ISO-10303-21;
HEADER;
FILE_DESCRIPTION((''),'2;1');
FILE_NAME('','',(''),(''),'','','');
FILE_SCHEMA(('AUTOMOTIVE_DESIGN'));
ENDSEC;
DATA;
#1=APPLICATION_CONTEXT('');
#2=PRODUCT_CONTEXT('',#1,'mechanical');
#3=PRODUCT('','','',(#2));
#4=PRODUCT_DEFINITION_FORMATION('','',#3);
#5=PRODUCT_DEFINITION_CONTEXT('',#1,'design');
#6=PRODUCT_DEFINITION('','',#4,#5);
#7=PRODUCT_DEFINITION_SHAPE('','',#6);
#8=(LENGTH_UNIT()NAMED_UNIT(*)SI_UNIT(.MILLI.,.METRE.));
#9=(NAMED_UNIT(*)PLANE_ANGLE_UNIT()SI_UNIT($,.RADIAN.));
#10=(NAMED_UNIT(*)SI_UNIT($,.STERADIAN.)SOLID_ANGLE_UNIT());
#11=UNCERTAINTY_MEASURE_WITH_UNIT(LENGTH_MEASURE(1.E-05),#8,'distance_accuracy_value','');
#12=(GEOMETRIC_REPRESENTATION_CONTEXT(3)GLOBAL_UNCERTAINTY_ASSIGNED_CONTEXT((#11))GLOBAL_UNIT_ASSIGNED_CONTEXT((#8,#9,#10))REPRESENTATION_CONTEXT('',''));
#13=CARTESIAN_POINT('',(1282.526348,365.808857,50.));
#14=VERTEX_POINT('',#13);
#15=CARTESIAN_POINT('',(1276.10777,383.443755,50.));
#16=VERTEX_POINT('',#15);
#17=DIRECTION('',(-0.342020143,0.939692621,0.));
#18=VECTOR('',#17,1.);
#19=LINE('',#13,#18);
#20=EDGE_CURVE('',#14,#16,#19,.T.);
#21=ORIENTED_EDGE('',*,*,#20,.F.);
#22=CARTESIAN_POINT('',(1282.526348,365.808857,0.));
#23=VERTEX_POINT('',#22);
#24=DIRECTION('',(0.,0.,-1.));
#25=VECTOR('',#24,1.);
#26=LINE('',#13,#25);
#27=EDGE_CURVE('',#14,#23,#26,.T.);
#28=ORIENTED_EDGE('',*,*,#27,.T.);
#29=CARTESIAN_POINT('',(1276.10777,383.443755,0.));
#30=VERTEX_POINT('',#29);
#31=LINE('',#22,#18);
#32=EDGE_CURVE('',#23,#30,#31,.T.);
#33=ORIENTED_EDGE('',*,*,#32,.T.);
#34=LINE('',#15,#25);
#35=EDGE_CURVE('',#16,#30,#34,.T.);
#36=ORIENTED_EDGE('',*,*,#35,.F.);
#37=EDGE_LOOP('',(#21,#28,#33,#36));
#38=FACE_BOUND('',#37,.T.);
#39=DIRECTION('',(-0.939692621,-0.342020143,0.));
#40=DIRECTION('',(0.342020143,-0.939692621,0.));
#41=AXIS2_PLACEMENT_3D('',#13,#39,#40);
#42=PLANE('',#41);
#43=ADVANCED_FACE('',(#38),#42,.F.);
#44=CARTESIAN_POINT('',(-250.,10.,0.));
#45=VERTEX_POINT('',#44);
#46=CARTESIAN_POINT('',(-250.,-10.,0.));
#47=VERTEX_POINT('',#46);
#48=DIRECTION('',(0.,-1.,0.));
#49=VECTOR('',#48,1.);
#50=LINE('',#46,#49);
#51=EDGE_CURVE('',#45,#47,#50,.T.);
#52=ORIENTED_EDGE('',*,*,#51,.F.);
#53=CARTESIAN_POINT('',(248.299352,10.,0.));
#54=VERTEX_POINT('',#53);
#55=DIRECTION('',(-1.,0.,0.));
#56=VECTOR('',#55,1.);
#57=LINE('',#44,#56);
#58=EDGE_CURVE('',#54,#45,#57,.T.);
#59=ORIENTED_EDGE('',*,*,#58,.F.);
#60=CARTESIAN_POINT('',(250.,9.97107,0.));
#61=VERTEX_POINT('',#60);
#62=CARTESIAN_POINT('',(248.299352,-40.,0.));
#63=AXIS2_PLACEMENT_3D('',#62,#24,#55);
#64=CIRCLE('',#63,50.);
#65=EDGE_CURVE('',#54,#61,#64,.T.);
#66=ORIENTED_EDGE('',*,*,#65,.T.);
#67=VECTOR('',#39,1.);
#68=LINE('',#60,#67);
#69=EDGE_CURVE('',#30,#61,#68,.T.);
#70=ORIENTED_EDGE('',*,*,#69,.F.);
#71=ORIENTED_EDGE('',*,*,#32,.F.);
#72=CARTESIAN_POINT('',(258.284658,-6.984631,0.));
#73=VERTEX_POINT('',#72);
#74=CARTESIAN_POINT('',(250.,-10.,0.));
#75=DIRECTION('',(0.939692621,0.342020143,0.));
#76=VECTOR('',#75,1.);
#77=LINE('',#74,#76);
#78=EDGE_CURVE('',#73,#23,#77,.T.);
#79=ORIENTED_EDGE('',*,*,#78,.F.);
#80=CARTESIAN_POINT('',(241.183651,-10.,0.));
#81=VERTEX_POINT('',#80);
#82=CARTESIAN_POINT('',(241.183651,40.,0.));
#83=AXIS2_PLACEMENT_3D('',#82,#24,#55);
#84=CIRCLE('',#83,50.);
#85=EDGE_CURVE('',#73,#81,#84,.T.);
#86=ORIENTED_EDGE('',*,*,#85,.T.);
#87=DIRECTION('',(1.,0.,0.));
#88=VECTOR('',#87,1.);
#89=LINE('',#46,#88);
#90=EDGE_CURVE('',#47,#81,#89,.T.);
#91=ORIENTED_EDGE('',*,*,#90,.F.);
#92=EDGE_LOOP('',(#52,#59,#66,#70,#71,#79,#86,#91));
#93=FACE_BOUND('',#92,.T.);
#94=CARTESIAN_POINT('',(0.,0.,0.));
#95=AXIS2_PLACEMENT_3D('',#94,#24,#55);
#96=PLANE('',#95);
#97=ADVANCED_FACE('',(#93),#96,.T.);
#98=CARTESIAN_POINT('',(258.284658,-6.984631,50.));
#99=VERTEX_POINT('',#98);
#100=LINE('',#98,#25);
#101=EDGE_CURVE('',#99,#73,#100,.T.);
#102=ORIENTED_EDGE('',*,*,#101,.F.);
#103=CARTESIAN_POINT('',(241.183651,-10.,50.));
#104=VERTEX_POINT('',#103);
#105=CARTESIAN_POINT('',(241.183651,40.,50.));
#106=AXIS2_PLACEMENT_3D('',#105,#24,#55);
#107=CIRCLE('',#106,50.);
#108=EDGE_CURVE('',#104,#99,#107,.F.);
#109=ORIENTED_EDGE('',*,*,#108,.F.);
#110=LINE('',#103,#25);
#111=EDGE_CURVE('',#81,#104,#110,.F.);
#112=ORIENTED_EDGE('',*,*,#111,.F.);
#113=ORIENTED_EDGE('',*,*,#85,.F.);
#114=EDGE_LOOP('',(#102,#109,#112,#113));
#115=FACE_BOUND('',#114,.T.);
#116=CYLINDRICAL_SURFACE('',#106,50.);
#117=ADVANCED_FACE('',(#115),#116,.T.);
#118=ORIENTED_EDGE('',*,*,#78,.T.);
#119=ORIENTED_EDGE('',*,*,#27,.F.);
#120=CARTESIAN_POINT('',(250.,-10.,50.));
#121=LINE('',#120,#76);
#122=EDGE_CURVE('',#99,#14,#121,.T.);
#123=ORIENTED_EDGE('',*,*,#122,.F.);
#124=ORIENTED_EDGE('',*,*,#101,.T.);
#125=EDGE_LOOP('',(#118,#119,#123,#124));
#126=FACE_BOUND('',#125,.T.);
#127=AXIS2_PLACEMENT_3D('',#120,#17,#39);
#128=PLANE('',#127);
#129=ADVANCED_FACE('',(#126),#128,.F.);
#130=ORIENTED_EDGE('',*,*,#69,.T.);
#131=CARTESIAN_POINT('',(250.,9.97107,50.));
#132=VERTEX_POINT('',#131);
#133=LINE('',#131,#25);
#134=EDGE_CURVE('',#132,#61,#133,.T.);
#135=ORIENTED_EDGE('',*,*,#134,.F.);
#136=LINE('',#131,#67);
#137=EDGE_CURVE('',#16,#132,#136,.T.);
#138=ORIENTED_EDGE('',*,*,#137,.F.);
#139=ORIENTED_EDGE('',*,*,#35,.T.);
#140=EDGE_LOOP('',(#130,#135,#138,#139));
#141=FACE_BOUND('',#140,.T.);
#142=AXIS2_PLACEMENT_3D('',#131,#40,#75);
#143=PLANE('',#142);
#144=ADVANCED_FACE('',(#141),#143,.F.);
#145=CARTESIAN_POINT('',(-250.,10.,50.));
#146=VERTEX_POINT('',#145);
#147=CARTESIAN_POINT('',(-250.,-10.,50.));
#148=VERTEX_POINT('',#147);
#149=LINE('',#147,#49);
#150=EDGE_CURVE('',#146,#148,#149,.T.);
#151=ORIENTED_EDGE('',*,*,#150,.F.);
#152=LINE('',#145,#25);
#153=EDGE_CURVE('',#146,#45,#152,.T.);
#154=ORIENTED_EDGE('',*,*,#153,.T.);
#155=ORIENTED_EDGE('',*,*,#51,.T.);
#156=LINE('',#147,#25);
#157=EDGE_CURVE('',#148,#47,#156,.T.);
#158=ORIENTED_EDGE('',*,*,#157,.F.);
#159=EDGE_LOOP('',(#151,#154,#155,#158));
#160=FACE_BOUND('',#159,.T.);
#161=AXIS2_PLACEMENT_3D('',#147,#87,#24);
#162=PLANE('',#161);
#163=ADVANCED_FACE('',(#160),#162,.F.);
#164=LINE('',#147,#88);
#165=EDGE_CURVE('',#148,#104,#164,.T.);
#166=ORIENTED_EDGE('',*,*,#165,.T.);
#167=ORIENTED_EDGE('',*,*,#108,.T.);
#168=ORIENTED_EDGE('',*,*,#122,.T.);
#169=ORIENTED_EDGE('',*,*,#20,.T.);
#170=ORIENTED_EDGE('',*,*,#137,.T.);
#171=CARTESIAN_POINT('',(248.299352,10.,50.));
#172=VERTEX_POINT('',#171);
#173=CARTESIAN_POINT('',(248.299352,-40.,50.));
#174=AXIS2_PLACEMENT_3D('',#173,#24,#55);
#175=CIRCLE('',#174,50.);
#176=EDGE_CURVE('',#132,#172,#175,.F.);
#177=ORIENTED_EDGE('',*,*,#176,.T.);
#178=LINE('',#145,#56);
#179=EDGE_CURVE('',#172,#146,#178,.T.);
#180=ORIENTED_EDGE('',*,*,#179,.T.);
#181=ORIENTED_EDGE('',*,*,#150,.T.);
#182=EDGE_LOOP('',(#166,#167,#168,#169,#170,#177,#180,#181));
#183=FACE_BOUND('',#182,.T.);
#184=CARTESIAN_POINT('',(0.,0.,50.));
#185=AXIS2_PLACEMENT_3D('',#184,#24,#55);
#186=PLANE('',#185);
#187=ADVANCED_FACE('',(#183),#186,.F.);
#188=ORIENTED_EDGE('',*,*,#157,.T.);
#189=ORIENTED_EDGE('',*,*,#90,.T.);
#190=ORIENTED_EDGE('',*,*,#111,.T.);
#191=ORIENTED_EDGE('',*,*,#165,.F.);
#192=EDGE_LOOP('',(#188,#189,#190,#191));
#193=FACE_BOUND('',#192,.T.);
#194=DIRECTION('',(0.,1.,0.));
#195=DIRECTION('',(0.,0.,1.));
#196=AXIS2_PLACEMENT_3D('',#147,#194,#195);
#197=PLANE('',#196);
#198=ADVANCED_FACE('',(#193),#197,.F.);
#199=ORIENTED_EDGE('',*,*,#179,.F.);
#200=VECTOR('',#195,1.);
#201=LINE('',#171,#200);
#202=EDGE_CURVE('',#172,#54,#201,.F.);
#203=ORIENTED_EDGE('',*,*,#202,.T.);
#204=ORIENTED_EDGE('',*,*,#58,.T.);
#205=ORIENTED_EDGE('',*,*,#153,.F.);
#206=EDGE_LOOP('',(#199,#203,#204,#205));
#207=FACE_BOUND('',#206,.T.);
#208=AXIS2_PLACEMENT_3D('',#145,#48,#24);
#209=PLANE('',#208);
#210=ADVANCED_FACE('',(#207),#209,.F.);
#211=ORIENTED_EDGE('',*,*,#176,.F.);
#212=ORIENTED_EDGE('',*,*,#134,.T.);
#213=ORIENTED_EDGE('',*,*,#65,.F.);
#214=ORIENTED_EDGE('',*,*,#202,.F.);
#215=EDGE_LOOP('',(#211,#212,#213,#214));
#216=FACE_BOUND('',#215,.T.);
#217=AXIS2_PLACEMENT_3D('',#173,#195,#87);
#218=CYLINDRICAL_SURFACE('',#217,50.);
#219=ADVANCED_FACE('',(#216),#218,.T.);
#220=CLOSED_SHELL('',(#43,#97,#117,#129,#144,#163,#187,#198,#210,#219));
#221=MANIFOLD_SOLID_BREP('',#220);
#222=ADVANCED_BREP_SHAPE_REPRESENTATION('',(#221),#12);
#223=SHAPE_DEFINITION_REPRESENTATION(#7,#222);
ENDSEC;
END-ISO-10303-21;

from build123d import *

# Parameters (mm, degrees)
DODANIE_WYCI_GNI_CIE1_DEPTH = 50
ZAOKR_GLENIE1_R             = 50


with BuildPart() as part:
    # Szkic1 → Dodanie-wyciągnięcie1 (new body)
    with BuildSketch(Plane.XY):
        Polygon((-250, -10), (250, -10), (1282.526348129, 365.808856814), (1276.107770084, 383.443755056), (250, 9.971069596), (250, 10), (-250, 10), align=None)
    extrude(amount=DODANIE_WYCI_GNI_CIE1_DEPTH)

    # Zaokrąglenie1
    # the kernel refuses this fillet: 50 mm, written as the material it takes off along each edge
    with BuildSketch(Plane(origin=(250, 10, -4.251619831), x_dir=(0, -1, 0), z_dir=(0, 0, 1))) as zaokr_glenie1_piece_1:
        with BuildLine():
            CenterArc((50, -1.700647932), ZAOKR_GLENIE1_R, 178.05082507, 1.94917493)
            Line((0, -1.700647932), (0, 0))
            Line((0, 0), (0.028930404, 0))
        make_face()
    extrude(amount=58.503239662, mode=Mode.SUBTRACT)
    with BuildSketch(Plane(origin=(250, -10, -22.040872589), x_dir=(-1, 0, 0), z_dir=(0, 0, 1))) as zaokr_glenie1_piece_2:
        with BuildLine():
            CenterArc((ZAOKR_GLENIE1_R * 0.176326980708, -ZAOKR_GLENIE1_R), ZAOKR_GLENIE1_R, 90, 20)
            Line((-ZAOKR_GLENIE1_R * 0.165693162617, -ZAOKR_GLENIE1_R * 0.0603073792141), (0, 0))
            Line((0, 0), (ZAOKR_GLENIE1_R * 0.176326980708, 0))
        make_face()
    extrude(amount=94.081745177, mode=Mode.SUBTRACT)


solid = part.part
